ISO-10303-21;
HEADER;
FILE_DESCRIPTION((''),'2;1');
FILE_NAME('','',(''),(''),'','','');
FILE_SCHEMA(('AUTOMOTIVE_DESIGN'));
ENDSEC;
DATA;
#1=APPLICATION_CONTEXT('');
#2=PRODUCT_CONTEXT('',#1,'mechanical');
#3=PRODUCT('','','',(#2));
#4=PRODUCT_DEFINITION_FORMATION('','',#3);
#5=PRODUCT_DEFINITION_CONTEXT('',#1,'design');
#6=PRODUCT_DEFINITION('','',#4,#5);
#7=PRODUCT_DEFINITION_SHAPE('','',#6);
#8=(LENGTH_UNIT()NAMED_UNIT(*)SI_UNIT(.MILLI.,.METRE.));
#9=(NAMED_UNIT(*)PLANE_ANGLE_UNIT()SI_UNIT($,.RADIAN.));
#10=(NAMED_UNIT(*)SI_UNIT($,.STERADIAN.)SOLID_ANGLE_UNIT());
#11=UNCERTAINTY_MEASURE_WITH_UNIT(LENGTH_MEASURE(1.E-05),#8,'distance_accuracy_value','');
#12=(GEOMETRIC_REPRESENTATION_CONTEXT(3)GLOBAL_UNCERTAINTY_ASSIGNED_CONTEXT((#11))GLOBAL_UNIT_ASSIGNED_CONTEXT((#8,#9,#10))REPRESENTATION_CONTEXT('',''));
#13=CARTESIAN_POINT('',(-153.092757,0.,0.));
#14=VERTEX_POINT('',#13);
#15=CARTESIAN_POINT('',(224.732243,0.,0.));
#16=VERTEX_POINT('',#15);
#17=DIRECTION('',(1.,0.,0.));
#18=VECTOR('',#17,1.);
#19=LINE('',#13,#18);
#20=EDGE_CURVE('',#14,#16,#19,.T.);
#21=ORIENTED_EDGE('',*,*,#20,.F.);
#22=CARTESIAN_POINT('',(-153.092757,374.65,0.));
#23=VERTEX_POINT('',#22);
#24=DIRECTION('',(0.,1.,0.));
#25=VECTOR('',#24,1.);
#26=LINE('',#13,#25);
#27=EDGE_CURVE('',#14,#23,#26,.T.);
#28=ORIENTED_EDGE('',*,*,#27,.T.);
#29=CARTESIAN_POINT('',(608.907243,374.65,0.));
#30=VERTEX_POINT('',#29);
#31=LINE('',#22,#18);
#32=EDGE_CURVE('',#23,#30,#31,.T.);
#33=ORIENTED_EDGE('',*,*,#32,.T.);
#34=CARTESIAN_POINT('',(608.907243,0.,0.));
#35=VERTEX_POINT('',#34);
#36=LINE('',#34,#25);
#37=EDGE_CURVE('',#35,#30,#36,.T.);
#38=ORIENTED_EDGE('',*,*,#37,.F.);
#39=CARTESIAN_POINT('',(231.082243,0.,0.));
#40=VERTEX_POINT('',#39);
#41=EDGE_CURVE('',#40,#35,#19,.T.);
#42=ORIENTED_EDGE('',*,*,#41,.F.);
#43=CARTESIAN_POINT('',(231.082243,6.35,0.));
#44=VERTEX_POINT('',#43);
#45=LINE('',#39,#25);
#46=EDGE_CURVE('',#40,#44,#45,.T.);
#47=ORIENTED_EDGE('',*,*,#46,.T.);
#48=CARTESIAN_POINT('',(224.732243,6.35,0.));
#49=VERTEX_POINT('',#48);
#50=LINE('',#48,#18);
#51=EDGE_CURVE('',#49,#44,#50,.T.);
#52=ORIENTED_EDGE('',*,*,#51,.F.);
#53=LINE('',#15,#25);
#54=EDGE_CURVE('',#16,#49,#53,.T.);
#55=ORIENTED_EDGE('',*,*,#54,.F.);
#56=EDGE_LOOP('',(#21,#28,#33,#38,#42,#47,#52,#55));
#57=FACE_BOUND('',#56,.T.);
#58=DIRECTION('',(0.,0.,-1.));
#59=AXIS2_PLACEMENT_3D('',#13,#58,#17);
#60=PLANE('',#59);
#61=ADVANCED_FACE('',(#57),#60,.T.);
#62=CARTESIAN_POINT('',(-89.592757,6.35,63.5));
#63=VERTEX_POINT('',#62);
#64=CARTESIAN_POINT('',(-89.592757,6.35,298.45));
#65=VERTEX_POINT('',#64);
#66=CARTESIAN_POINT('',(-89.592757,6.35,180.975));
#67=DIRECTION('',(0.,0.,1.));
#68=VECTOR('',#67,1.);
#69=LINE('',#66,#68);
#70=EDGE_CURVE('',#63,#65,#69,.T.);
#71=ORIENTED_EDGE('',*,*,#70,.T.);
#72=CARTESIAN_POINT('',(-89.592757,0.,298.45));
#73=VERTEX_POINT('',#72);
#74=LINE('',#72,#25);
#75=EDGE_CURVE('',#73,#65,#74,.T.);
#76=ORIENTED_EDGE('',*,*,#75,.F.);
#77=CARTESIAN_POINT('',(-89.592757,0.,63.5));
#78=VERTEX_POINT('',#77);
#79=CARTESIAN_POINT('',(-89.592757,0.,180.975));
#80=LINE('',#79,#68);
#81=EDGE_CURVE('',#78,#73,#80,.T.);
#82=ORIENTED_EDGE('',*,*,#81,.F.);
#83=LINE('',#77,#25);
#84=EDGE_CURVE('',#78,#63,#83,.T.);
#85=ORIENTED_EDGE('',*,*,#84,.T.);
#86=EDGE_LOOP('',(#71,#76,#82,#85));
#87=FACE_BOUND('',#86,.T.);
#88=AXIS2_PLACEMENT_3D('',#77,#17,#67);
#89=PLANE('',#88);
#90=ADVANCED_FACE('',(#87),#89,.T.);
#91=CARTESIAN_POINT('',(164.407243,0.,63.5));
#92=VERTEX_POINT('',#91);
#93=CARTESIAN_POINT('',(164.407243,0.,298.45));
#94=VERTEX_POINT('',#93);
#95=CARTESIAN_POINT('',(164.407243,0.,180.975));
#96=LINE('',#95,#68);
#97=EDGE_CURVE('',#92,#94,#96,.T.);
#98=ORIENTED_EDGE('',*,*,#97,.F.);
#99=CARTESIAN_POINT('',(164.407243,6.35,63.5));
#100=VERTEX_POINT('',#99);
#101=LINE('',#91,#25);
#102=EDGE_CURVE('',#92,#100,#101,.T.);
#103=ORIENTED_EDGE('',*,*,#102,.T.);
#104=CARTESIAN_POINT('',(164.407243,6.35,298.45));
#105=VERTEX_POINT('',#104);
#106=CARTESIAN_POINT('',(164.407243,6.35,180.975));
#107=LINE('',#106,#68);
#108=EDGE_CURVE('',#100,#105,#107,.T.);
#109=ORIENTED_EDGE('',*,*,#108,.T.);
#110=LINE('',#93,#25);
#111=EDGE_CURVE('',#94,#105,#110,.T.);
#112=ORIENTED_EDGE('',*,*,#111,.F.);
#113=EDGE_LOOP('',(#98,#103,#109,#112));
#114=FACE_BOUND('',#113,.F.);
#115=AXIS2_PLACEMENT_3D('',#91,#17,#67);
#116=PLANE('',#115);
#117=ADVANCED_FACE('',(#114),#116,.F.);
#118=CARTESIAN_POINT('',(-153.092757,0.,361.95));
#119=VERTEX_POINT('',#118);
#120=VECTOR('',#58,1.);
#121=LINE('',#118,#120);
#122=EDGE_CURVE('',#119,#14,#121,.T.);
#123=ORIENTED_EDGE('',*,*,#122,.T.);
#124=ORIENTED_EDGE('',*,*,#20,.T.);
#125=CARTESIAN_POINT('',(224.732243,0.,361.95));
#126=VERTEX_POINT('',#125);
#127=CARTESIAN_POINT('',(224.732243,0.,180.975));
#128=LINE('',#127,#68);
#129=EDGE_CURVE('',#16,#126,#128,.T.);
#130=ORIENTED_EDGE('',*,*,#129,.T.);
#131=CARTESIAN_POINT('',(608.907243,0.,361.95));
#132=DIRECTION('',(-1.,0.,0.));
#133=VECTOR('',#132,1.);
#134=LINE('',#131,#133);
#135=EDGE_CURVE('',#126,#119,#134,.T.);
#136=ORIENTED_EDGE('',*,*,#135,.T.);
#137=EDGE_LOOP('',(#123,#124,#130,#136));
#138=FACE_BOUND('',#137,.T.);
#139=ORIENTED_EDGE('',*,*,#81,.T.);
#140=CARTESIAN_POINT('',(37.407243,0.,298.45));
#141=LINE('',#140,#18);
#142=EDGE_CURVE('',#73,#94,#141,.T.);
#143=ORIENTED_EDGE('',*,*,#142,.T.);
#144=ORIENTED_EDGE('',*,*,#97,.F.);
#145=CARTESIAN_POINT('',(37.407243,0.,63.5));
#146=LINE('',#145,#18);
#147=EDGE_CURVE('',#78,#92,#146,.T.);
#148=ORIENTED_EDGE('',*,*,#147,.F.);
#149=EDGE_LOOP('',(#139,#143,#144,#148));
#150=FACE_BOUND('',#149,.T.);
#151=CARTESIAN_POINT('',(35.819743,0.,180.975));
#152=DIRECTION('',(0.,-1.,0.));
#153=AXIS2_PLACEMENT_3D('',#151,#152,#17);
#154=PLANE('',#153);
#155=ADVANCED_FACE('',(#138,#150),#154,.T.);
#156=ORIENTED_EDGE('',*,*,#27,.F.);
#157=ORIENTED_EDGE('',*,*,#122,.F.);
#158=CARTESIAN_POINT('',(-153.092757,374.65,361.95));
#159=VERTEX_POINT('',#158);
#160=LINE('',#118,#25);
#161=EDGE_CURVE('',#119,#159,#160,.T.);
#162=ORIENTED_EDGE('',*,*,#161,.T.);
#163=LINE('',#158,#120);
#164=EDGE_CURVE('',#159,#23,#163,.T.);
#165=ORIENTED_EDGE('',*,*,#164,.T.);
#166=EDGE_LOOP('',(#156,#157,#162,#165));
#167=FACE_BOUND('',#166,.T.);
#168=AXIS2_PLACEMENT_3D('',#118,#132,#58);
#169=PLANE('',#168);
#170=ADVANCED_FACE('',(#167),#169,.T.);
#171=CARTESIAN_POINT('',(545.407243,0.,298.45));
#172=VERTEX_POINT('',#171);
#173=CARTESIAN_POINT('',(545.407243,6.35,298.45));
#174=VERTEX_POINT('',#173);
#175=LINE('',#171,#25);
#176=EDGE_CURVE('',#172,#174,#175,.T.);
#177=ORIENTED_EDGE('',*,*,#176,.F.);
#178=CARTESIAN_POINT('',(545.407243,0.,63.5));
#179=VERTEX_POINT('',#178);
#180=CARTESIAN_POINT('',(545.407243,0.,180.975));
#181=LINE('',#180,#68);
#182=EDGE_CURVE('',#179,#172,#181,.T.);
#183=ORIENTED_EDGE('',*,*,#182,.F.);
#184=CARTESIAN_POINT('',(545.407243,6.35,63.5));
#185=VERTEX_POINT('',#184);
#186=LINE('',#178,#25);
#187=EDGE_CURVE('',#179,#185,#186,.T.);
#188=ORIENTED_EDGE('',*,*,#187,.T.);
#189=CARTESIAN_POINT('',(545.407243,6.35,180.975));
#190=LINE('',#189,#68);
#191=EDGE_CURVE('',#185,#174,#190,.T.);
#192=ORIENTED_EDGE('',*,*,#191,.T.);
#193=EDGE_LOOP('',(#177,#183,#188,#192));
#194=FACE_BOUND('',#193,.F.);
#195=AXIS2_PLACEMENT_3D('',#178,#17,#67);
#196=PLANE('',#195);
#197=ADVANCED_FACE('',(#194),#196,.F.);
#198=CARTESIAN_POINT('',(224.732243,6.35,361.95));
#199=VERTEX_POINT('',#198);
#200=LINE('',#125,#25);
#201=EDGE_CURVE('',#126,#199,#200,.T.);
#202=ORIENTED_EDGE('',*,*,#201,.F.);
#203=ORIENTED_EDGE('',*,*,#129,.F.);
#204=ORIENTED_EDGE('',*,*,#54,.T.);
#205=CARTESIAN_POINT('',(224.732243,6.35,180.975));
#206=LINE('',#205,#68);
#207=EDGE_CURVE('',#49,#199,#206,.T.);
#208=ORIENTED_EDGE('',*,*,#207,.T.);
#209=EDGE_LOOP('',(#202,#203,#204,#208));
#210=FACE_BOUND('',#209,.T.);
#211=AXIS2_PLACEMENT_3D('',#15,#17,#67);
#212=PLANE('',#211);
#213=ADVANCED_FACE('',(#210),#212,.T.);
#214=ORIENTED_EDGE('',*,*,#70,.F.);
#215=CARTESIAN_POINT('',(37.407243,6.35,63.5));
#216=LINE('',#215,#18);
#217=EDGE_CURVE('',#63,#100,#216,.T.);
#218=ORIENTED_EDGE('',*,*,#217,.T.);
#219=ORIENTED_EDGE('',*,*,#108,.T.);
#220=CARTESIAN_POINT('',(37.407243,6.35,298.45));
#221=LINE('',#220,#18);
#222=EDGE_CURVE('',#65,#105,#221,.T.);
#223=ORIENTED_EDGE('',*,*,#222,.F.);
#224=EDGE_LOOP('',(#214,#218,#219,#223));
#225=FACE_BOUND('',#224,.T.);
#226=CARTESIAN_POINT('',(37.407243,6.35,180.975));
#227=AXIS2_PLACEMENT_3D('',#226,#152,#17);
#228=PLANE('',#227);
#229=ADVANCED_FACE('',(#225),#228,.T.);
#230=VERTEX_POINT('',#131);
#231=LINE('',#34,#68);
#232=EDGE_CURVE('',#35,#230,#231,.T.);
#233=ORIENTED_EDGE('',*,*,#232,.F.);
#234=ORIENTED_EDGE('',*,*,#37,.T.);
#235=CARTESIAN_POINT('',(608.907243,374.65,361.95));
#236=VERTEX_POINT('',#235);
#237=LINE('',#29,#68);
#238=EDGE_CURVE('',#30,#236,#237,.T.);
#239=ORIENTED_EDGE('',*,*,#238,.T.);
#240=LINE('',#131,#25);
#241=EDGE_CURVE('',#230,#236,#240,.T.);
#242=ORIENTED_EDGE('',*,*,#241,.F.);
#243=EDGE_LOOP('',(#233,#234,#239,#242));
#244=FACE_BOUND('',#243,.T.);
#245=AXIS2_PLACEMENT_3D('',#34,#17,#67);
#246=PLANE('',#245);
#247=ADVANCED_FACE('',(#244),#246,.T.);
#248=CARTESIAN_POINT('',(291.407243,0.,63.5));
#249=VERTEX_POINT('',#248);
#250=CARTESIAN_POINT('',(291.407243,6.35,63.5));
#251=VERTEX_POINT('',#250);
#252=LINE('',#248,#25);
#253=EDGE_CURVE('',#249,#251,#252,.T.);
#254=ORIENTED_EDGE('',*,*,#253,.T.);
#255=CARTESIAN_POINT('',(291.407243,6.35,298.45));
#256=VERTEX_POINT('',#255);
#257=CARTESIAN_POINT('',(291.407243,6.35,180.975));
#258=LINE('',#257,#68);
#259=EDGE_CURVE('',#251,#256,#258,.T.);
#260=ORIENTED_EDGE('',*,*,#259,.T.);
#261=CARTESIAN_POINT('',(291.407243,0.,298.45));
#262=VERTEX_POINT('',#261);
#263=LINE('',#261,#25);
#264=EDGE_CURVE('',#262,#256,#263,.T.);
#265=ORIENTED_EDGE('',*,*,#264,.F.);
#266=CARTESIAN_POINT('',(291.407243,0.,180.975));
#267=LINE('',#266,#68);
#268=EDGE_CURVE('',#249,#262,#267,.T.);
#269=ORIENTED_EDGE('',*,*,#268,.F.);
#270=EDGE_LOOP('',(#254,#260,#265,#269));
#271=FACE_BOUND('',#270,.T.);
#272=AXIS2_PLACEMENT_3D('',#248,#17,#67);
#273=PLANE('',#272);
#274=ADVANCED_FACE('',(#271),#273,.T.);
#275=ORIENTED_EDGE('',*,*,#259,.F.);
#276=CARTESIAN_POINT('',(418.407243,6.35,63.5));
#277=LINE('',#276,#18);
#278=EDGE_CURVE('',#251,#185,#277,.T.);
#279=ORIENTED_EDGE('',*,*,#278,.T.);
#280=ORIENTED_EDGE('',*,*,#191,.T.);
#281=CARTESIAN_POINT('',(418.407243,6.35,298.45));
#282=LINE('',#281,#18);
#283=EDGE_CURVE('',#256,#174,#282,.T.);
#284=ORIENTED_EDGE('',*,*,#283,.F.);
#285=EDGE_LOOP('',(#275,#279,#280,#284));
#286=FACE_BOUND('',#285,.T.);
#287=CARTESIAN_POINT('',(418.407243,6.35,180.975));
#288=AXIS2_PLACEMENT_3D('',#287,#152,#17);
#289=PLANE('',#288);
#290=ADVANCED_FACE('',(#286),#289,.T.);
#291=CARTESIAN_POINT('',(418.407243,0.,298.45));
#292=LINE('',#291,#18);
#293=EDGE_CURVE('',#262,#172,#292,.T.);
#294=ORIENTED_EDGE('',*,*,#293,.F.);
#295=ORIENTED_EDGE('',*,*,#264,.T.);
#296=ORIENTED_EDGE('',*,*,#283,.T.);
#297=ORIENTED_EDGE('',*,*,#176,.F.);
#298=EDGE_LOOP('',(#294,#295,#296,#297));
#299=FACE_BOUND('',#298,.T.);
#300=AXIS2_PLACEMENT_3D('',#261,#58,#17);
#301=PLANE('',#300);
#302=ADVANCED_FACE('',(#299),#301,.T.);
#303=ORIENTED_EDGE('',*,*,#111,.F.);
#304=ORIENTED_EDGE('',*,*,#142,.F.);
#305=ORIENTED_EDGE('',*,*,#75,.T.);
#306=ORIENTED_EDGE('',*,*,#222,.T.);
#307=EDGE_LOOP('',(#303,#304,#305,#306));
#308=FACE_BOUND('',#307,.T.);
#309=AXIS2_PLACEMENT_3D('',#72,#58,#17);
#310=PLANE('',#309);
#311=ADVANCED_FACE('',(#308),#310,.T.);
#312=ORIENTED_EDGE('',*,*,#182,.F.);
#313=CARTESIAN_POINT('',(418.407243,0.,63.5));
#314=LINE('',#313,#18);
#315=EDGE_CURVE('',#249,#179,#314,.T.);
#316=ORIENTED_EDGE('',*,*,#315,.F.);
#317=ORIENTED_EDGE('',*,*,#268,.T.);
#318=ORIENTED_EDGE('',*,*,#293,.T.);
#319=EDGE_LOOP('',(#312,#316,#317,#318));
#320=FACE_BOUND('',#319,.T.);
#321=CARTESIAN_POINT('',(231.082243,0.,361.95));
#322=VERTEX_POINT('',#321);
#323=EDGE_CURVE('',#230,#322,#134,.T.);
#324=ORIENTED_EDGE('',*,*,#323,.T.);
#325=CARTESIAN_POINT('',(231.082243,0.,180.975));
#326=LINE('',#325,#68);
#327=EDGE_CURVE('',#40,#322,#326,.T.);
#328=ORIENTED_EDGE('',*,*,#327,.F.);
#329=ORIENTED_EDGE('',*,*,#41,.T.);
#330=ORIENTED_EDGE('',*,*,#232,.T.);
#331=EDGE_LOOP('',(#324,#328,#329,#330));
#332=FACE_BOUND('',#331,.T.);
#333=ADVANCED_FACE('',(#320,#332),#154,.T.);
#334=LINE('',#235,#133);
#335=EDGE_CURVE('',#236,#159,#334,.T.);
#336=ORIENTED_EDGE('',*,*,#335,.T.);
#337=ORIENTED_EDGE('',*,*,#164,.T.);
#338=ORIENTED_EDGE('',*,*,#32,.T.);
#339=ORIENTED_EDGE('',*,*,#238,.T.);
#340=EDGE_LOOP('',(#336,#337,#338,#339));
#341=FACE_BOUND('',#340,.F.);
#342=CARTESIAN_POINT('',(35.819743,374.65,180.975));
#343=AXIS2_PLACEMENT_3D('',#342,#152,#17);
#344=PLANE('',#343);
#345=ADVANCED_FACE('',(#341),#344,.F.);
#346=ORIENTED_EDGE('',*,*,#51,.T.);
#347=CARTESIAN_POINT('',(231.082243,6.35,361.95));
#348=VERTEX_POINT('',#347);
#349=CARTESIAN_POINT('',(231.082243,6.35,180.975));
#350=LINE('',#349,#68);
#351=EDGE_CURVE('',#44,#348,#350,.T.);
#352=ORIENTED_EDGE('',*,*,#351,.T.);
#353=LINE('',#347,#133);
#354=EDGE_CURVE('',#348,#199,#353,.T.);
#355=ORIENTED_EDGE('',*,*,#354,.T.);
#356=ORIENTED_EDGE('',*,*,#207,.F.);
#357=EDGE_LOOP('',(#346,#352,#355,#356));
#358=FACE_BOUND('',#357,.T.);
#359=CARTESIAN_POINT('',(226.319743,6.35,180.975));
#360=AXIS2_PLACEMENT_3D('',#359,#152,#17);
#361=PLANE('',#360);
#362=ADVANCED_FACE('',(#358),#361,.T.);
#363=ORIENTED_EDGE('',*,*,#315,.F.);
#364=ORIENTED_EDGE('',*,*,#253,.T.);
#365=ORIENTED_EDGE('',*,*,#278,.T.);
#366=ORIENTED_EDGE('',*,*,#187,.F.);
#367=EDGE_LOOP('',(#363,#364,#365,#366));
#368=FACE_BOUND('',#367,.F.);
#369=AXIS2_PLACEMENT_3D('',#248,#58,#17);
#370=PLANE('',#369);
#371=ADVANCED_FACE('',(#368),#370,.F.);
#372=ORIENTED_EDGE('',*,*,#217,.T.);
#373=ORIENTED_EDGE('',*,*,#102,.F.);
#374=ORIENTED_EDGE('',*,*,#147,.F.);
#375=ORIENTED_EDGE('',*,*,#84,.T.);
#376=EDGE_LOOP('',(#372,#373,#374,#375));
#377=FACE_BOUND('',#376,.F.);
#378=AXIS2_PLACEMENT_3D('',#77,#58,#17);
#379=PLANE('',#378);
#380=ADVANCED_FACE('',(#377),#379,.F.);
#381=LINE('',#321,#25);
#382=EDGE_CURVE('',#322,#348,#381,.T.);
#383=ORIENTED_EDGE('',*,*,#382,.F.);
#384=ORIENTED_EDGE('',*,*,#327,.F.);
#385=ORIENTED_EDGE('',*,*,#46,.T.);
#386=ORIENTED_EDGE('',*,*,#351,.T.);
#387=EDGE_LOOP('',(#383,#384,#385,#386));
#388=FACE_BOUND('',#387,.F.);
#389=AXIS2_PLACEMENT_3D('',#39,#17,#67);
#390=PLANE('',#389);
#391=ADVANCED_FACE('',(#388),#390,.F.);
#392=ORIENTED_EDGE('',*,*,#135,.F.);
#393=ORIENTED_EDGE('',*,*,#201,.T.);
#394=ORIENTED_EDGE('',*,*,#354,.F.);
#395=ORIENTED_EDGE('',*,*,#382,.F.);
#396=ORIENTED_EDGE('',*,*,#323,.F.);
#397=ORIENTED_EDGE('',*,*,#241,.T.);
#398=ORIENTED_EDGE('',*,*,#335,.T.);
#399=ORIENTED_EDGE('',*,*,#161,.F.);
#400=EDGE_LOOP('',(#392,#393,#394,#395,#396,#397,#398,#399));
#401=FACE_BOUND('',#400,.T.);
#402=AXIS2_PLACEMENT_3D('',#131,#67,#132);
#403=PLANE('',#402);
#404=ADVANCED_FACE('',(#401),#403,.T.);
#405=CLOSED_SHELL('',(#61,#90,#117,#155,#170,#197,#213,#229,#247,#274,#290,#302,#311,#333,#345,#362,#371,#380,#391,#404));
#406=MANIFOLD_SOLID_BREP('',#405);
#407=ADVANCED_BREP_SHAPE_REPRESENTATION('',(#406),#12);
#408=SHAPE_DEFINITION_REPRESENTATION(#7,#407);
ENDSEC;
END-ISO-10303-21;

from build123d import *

# Parameters (mm, degrees)
F0_W     = 254
F0_H     = 234.95
F0_W_2   = 3.175
F0_H_2   = 361.95
F1_DEPTH = 374.65
F2_DEPTH = 6.35


# Not quite as in the source:
# - a feature names something its author has since deleted; it is built from what else it names


with BuildPart() as f1:
    # F0 (on Front) → F1 (new body)
    with BuildSketch(Plane.XZ):
        Polygon((-153.0927574873, 0), (224.7322425127, 0), (224.7322425127, 361.95), (177.1072425127, 361.95), (-153.0927574873, 361.95), align=None)
        with Locations((37.4072425127, 180.975)):
            Rectangle(F0_W, F0_H, mode=Mode.SUBTRACT)
        Polygon((231.0822425127, 361.95), (231.0822425127, 0), (608.9072425127, 0), (608.9072425127, 361.95), (278.7072425127, 361.95), align=None)
        with Locations((418.4072425127, 180.975)):
            Rectangle(F0_W, F0_H, mode=Mode.SUBTRACT)
        with Locations((37.4072425127, 180.975)):
            Rectangle(F0_W, F0_H)
        with Locations((418.4072425127, 180.975)):
            Rectangle(F0_W, F0_H)
        with Locations((226.3197425127, 180.975)):
            Rectangle(F0_W_2, F0_H_2)
        with Locations((229.4947425127, 180.975)):
            Rectangle(F0_W_2, F0_H_2)
    extrude(amount=-F1_DEPTH)

    # F0 (on Front) → F2 (cut)
    with BuildSketch(Plane.XZ):
        with Locations((226.3197425127, 180.975)):
            Rectangle(F0_W_2, F0_H_2)
        with Locations((229.4947425127, 180.975)):
            Rectangle(F0_W_2, F0_H_2)
        with Locations((37.4072425127, 180.975)):
            Rectangle(F0_W, F0_H)
        with Locations((418.4072425127, 180.975)):
            Rectangle(F0_W, F0_H)
    extrude(amount=-F2_DEPTH, mode=Mode.SUBTRACT)


solid = f1.part
